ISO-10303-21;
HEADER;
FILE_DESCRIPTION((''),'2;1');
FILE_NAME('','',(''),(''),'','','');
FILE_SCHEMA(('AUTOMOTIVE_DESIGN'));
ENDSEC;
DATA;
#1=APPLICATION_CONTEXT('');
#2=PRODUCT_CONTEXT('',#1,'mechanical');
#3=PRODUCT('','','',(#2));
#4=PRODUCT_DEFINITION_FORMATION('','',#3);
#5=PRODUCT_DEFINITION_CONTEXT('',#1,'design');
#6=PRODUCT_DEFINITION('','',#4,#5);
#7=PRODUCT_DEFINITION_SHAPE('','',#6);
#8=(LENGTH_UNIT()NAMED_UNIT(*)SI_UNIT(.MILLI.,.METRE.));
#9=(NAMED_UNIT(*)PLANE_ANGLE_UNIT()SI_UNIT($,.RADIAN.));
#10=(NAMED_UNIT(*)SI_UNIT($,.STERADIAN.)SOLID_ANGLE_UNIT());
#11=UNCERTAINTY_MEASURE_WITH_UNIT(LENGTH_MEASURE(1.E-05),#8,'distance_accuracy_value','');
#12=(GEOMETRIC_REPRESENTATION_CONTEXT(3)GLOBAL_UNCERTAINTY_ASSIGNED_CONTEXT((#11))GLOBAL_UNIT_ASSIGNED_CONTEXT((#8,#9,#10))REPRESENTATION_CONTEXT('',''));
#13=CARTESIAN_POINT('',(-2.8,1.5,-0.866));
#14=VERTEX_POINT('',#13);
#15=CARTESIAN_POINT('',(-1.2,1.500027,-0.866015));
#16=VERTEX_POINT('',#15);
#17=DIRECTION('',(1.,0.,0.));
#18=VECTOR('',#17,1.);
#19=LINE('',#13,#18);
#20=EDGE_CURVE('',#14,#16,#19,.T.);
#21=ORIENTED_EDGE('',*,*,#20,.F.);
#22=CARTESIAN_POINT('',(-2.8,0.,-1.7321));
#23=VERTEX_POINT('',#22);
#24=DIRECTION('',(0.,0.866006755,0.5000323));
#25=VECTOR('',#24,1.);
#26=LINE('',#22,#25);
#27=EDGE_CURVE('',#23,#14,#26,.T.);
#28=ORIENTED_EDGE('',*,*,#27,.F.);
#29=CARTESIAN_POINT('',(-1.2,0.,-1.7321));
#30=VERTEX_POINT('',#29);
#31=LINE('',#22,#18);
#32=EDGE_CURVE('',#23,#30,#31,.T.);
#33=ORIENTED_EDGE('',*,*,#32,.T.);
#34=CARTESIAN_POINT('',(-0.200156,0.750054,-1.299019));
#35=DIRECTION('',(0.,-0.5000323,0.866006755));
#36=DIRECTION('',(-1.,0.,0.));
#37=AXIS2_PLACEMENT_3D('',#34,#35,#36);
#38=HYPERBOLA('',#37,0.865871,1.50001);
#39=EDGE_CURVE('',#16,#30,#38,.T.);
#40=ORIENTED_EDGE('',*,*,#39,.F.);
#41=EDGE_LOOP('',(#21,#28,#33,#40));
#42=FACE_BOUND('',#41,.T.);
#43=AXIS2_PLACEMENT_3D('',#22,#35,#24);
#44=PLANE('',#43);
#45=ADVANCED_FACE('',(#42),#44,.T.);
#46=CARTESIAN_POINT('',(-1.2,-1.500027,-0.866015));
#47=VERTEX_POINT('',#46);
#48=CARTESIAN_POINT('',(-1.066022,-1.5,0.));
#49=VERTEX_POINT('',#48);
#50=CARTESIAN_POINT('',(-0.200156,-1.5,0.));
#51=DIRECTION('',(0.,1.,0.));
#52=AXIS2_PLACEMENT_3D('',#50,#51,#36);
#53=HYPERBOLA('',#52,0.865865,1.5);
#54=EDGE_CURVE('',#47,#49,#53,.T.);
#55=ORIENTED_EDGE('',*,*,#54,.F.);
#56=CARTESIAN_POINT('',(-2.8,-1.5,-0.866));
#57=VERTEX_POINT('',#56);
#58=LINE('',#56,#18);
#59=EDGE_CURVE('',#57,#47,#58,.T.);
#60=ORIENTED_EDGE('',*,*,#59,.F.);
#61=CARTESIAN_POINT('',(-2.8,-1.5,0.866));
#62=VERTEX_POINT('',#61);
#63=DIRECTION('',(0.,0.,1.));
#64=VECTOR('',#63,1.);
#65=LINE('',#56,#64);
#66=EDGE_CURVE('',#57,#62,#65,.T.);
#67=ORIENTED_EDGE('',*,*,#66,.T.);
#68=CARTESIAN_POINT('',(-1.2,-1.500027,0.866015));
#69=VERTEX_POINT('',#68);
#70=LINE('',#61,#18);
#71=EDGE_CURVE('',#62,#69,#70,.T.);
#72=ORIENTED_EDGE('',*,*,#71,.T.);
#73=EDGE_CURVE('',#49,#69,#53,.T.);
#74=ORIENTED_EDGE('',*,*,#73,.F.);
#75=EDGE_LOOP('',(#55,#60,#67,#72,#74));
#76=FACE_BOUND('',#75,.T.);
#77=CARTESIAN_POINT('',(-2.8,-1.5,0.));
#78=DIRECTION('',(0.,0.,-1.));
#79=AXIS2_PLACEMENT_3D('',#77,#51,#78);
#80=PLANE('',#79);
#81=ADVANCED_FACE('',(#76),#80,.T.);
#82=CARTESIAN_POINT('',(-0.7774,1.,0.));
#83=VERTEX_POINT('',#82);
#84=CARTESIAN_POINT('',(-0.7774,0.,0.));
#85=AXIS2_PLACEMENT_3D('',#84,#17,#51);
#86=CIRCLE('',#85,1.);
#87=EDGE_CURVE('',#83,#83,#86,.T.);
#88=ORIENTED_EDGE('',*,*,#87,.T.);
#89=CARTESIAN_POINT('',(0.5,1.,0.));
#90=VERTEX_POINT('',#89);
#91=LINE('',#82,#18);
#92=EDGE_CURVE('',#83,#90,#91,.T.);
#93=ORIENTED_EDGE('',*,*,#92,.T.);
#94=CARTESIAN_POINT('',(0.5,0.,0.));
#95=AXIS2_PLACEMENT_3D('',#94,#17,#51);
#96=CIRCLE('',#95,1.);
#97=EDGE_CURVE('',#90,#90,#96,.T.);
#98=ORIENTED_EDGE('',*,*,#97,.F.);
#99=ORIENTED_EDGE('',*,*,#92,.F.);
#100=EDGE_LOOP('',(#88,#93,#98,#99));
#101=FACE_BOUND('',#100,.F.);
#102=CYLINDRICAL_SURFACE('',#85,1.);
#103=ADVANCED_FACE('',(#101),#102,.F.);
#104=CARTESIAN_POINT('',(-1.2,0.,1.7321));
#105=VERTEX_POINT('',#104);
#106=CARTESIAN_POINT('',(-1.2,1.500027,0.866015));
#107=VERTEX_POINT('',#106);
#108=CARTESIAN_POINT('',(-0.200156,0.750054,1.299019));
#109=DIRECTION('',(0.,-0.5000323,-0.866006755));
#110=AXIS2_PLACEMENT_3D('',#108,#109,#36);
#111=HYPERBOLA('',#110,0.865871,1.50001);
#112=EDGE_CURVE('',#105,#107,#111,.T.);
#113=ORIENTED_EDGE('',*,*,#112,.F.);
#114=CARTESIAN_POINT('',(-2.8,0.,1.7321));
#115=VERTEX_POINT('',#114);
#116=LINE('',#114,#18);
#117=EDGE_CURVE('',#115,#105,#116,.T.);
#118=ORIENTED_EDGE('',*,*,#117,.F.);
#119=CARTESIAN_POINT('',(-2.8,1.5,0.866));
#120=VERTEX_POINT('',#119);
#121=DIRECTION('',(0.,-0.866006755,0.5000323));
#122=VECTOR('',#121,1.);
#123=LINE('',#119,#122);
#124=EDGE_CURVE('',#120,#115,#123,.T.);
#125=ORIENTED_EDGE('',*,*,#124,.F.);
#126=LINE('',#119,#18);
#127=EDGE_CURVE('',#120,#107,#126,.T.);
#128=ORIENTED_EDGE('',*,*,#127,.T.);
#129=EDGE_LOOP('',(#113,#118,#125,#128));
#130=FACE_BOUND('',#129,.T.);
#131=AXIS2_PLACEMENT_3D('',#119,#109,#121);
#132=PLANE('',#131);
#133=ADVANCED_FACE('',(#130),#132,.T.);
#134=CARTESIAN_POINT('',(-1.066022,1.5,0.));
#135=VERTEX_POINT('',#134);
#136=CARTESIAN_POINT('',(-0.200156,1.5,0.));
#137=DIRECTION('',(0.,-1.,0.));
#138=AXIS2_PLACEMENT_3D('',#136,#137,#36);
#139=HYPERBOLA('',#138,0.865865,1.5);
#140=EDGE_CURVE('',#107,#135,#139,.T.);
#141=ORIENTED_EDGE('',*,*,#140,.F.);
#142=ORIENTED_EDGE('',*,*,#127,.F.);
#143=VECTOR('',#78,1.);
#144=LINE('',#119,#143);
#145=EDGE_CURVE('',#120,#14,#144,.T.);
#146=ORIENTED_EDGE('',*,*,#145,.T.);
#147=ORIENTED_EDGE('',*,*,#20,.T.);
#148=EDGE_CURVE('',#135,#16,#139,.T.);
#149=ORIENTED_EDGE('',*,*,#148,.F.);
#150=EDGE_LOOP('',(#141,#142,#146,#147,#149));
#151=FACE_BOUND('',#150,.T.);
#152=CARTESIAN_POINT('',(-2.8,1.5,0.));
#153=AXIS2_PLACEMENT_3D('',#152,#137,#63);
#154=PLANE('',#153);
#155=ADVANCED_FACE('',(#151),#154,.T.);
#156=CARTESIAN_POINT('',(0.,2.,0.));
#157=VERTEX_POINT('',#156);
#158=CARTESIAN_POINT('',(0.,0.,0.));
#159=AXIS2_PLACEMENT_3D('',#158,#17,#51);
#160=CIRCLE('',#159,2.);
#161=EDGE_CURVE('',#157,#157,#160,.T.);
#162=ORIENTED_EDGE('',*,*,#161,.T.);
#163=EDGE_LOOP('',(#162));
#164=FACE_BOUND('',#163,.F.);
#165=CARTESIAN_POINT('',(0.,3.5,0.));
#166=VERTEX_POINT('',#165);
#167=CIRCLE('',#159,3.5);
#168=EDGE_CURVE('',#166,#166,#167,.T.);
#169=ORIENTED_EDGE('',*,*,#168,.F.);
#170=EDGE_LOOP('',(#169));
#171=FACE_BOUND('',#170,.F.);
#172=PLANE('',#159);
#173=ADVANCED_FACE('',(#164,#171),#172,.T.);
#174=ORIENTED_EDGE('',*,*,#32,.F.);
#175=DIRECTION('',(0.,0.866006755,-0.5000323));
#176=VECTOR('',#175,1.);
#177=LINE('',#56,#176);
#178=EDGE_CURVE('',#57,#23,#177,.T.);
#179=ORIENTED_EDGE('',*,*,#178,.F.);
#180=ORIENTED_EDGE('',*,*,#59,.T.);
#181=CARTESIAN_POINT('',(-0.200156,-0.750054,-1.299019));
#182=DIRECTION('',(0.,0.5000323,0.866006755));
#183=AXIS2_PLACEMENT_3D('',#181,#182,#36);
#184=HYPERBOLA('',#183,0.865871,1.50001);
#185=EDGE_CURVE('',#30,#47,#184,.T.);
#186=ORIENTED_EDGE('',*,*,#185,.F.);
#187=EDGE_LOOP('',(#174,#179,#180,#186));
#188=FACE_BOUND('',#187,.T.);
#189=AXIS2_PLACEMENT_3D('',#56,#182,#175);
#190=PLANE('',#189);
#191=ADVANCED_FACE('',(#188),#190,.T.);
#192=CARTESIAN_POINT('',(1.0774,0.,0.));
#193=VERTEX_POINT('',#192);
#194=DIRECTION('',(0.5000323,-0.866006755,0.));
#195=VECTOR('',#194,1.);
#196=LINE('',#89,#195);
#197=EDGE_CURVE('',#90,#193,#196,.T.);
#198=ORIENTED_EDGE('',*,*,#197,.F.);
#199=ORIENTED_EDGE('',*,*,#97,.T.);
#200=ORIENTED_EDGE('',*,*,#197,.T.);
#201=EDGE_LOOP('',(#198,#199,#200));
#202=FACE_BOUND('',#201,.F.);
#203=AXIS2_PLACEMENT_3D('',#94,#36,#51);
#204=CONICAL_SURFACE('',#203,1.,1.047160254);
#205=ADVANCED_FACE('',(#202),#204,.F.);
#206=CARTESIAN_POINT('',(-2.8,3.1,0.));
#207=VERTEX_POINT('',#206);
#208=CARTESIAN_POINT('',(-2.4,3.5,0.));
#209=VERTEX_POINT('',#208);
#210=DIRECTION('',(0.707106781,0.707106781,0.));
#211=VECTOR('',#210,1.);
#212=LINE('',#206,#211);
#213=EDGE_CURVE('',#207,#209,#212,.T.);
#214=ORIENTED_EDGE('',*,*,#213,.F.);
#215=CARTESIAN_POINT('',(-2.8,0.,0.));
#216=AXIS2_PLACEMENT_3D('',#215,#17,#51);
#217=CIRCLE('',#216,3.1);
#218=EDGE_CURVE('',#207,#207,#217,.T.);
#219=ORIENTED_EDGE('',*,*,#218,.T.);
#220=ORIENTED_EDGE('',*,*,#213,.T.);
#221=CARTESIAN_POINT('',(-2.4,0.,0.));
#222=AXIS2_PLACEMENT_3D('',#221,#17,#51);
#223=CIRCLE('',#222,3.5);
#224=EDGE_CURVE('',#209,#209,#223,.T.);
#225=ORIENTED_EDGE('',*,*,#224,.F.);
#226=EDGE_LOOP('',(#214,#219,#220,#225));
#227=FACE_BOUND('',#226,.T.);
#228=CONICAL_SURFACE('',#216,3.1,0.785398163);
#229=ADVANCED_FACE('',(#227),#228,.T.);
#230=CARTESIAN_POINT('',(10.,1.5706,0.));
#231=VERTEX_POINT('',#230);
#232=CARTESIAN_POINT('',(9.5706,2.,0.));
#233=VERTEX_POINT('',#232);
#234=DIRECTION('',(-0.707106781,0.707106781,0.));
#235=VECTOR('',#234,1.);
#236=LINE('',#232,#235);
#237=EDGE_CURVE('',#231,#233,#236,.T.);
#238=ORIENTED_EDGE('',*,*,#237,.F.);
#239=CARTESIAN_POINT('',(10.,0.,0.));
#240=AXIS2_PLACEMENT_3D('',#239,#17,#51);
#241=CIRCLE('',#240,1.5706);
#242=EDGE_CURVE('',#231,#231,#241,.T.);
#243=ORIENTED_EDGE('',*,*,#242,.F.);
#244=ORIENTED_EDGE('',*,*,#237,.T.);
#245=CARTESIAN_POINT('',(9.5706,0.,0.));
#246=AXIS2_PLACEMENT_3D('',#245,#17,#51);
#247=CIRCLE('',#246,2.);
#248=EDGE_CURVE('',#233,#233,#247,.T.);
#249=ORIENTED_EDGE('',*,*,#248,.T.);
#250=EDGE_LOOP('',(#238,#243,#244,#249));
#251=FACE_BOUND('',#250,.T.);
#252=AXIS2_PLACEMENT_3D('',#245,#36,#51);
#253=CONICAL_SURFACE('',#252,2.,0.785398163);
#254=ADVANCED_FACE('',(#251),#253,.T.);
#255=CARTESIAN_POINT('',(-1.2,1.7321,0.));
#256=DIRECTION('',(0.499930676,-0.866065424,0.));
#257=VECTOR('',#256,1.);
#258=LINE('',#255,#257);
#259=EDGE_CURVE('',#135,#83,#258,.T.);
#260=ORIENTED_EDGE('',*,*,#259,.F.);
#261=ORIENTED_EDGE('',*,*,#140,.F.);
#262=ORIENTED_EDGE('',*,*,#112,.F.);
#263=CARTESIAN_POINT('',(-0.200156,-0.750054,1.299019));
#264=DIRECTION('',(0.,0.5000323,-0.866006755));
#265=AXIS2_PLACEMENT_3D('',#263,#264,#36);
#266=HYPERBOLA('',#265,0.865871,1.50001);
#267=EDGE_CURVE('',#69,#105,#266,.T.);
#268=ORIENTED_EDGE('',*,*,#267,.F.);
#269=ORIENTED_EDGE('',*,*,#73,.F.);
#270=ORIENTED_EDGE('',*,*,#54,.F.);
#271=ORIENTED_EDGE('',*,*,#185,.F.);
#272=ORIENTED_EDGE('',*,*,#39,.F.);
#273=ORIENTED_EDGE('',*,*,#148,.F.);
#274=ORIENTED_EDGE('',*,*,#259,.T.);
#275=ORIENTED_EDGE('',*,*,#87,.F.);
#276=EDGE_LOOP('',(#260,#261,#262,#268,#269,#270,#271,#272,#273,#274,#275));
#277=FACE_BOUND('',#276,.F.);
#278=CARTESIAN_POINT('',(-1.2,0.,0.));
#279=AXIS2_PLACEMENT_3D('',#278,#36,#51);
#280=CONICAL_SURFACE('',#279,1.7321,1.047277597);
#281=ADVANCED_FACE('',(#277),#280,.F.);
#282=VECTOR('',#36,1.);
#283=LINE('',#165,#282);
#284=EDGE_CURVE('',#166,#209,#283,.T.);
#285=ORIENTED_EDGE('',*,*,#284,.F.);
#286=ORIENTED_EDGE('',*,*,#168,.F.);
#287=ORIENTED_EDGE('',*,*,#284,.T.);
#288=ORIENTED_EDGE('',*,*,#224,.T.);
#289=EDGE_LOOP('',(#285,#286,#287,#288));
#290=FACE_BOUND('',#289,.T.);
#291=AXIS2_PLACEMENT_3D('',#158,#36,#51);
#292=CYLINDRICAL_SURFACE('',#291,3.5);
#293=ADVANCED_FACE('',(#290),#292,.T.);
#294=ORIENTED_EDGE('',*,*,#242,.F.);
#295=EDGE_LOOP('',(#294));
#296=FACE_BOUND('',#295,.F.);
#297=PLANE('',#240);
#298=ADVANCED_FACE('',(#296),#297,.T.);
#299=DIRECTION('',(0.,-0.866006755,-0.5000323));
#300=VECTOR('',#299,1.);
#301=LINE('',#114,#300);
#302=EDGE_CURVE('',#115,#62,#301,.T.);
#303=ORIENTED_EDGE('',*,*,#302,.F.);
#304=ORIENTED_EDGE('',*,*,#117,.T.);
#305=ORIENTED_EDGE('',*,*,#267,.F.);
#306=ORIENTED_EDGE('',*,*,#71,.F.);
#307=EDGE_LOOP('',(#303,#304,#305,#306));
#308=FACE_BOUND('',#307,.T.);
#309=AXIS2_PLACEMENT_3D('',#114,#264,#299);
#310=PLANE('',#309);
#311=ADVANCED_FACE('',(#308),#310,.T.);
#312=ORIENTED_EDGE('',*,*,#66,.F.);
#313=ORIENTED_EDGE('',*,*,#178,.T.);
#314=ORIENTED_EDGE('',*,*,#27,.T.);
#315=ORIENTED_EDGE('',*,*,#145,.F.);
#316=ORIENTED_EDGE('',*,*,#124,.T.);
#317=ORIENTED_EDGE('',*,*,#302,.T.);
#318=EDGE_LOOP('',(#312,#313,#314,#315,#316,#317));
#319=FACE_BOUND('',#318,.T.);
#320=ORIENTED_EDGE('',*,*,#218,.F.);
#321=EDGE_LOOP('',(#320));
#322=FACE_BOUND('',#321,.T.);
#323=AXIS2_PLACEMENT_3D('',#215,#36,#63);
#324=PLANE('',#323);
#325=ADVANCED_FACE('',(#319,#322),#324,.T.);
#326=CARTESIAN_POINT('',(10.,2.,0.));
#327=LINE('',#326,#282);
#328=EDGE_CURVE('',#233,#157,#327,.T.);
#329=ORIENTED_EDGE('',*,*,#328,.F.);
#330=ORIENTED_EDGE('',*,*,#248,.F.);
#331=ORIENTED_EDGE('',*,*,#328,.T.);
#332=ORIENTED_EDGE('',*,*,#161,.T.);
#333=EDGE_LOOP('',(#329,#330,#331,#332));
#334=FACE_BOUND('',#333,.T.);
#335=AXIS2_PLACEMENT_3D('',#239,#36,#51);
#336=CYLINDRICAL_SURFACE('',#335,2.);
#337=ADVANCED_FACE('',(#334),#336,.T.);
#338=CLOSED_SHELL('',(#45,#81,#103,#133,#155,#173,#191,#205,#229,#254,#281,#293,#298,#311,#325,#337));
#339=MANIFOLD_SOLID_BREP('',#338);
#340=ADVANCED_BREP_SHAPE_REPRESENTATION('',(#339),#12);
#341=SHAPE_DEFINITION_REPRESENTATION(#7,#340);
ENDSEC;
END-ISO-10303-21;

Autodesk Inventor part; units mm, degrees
ref_plane "YZ Plane" through (0, 0, 0) normal (1, 0, 0) x (0, 1, 0)
ref_plane "XZ Plane" through (0, 0, 0) normal (0, 1, 0) x (-1, 0, 0)
sketch "Skizze1" plane through (0, 0, 0) normal (0, 0, 1) x (1, 0, 0)
  line L0 (1.0774, 0) -> (10, 0)
  line L1 (10, 0) -> (10, 2)
  line L2 (10, 2) -> (0, 2)
  line L3 (0, 2) -> (0, 3.5)
  line L4 (0, 3.5) -> (-2.8, 3.5)
  line L5 (-2.8, 3.5) -> (-2.8, 1.7321)
  line L6 (-2.8, 1.7321) -> (-1.2, 1.7321)
  line L7 (-1.2, 1.7321) -> (-0.7774, 1)
  line L8 (-5.36, 0) -> (12.56, 0) projected
  line L9 (0, -0.7) -> (0, 4.2) projected
  line L10 (-0.7774, 1) -> (0.5, 1)
  line L11 (0.5, 1) -> (1.0774, 0)
  line L12 (-2.8, 1.7321) -> (-2.8, 0) construction
  line L13 (-2.8, 3.1) -> (-2.4, 3.5)
  dimension "d0" = 2.8
  dimension "d1" = 1.6
  dimension "d2" = 60
  dimension "d3" = 4
  dimension "d4" = 3.4641
  dimension "d5" = 7
  dimension "d15" = 3.3
  dimension "d16" = 2
  dimension "d17" = 10
  dimension "d32" = 45
  dimension "d33" = 0.4
revolve "Körper" add sketch "Skizze1" angle 360 about axis through (1.0774, 0, 0) along (1, 0, 0) contours L11 L10 L9 L2 L1 L0 | L10 L7 L6 L5 L13 L4 L3 L9 | L13 L5 L4
revolve "Fase2" cut sketch "Skizze1" angle 360 about axis through (-10, 0, 0) along (1, 0, 0) contours L13 L5 L4
sketch "Skizze2" plane through (-2.8, 0, 0) normal (-1, 0, 0) x (0, 0, 1)
  circle A0 centre (0, 0) radius 1.7321 projected
  line L0 (0, -4.9) -> (0, 4.9) projected
  line L1 (-4.9, 0) -> (4.9, 0) projected
  line L2 (1.7321, 0) -> (0.866, -1.5)
  line L3 (0.866, -1.5) -> (-0.866, -1.5)
  line L4 (-0.866, -1.5) -> (-1.7321, 0)
  line L5 (-1.7321, 0) -> (-0.866, 1.5)
  line L6 (-0.866, 1.5) -> (0.866, 1.5)
  line L7 (0.866, 1.5) -> (1.7321, 0)
extrude "Loch" add sketch "Skizze2" against normal up to next contours L7 A0 | A0 L2 | L6 L0 A0 | A0 L0 L3 | L0 L6 A0 | A0 L3 L0 | L4 A0 | A0 L5
thread "Gewinde" size "M4x0.7" class "6g" standard "ISO Metric profile" length 6.5
chamfer "Fase1" distance 0.4294 distance2 0.4294 1 edges at (10, -2, 0) measured on face at (10, 0.556, 0.0273)
ref_plane "Work Plane1" through (5, 0, 0) normal (0, 0.5, 0.8660254) x (1, 0, 0)
equation "\"d9\" = -0.5 * SPD + 0.5 * GD"
equation "\"d12\" = GUL"
equation "\"d0\" = KOH"
equation "\"d1\" = INTI"
equation "\"d3\" = GD"
equation "\"d4\" = 1.1547 * SW"
equation "\"d5\" = KOD"
equation "\"d15\" = INFT"
equation "\"d16\" = SDT"
equation "\"d17\" = NLG"
equation "\"d33\" = Cham"
equation "\"d7\" = GEL"
equation "\"GD\" = NND"
equation "\"NLG\" = 10"
equation "\"GEL\" = 6.5"
equation "\"KOD\" = 7"
equation "\"KOH\" = 2.8"
equation "\"GUL\" = 0.61345 * PTC"
equation "\"SW\" = 3"
equation "\"INTI\" = 1.6"
equation "\"SPD\" = NND - 1.2269 * PTC"
equation "\"SDT\" = 2"
equation "\"INFT\" = 3.3"
equation "\"Cham\" = 0.4"
equation "\"TOA\" = 30deg"
equation "\"GD1\" = THREADDIA - 1.2269 * PTC"
equation "\"THREADDIA\" = 4"
equation "\"BDM\" = NND"
equation "\"FAWI\" = 45deg"
equation "\"RR\" = 0.1 * NND"
equation "\"PTC\" = 0.7"
equation "\"NND\" = 4"
equation "\"FAWI1\" = 45deg"
equation "\"GAL\" = 0.61345 * PTC"
equation "\"E0\" = 1.155 * SW"
properties part number "DIN 6912 - M4 x 10" material "Stahl, weich"
